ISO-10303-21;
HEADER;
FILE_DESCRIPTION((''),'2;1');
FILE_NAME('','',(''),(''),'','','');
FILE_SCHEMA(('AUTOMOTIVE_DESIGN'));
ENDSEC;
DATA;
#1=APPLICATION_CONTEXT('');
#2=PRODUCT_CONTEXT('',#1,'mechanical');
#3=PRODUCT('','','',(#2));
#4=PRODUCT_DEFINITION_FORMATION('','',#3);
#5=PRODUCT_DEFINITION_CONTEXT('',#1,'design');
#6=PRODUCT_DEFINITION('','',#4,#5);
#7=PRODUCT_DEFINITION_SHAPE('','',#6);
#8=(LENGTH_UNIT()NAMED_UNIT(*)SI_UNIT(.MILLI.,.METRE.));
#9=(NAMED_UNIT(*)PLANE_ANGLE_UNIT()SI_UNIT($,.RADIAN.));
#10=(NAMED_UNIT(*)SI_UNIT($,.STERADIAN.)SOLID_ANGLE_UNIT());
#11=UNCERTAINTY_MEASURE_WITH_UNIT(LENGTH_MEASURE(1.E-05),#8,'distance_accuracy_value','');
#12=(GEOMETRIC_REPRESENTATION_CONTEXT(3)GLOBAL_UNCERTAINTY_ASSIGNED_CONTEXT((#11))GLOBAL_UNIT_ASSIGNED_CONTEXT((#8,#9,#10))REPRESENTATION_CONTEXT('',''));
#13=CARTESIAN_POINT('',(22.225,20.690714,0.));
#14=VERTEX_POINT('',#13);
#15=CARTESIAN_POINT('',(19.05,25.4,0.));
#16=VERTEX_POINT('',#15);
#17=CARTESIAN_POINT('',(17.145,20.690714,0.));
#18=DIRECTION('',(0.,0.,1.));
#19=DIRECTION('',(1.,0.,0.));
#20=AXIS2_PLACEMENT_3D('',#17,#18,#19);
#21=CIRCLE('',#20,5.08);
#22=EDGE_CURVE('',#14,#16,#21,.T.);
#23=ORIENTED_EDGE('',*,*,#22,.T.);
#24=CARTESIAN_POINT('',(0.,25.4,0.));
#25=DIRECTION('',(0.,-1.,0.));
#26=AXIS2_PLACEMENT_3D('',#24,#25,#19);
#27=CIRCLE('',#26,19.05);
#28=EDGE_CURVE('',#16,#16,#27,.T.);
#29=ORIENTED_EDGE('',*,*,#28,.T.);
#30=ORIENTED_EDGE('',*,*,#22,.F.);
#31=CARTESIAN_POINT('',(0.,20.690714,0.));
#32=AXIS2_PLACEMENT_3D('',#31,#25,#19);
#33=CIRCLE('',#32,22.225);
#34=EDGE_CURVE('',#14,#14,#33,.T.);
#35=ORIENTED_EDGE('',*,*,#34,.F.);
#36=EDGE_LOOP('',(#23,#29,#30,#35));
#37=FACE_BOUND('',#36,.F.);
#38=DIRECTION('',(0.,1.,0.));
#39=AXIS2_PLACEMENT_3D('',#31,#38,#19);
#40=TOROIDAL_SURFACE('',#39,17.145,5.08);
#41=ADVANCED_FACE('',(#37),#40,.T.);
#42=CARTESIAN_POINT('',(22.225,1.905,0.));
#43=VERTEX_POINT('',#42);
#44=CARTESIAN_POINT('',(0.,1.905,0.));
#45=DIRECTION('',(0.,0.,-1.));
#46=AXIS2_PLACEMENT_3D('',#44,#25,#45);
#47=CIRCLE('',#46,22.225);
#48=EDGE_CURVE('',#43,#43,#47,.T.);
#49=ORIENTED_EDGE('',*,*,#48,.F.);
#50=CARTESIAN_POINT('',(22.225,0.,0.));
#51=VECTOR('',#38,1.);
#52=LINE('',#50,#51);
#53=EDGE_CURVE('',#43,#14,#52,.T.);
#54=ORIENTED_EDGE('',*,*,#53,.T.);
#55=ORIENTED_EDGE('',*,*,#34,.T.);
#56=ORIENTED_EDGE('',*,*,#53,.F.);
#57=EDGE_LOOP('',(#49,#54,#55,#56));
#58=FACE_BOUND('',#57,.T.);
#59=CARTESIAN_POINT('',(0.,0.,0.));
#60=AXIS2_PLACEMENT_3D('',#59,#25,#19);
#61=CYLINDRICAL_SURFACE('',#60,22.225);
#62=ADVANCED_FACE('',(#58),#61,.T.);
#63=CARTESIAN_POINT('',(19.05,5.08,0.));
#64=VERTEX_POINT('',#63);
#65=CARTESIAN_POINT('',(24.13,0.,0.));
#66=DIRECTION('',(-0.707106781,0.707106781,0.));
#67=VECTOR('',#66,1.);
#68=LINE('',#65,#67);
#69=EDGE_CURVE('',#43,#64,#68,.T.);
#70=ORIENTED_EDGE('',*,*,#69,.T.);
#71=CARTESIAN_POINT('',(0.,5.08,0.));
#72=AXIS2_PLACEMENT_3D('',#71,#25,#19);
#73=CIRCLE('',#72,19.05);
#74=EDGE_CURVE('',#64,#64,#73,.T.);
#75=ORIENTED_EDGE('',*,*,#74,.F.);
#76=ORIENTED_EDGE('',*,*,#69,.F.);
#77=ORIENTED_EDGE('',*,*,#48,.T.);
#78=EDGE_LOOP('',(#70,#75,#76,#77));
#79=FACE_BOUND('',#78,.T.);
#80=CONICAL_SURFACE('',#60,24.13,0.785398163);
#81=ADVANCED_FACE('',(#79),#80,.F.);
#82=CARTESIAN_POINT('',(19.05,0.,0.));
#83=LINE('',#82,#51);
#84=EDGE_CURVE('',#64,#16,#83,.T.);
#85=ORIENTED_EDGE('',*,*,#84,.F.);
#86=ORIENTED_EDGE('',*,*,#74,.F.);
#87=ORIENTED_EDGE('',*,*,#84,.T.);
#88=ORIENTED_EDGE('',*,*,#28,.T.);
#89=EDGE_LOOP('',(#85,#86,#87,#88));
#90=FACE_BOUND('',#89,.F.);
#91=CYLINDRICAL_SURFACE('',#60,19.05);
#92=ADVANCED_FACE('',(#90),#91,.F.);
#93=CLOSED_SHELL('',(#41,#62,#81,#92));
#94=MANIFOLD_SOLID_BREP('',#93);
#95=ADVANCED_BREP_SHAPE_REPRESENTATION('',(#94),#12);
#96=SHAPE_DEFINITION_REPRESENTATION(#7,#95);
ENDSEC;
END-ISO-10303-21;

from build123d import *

# Parameters (mm, degrees)
F0_R     = 22.225
F1_DEPTH = 25.4
F2_T     = -3.175


# Not quite as in the source:
# - a fillet or chamfer that OpenCascade refuses, or shapes differently, is made with other operations: its cross-section is extruded or revolved along the edge and cut away or added


with BuildPart() as f1:
    # F0 (on Front) → F1 (new body)
    with BuildSketch(Plane.XZ):
        Circle(F0_R)
    extrude(amount=-F1_DEPTH)

    # F2
    f2_openings = [f1.faces().sort_by_distance(p)[0] for p in [
        (0, 0, 0),
        (0, 25.4, 0),
    ]]
    offset(amount=F2_T, openings=f2_openings)

    # F3: chamfer of 5.08 on 1 edges, made by hand

    # F3_s1 → F3_t2 (revolve, cut)
    with BuildSketch(Plane.XY):
        Polygon((24.13, 0), (19.05, 5.08), (19.05, 0), align=None)
    revolve(axis=Axis((0, 0, 0), (0, -1, 0)), mode=Mode.SUBTRACT)

    # F4: fillet of radius 5.08 on 1 edges, made by hand

    # F4_s1 → F4_t2 (revolve, cut)
    with BuildSketch(Plane.XY):
        with BuildLine():
            ThreePointArc((22.225, 20.6907139607), (21.3571134838, 23.5305202921), (19.05, 25.4))
            Line((19.05, 25.4), (22.225, 25.4))
            Line((22.225, 25.4), (22.225, 20.6907139607))
        make_face()
    revolve(axis=Axis((0, 25.4, 0), (0, -1, 0)), mode=Mode.SUBTRACT)


solid = f1.part
